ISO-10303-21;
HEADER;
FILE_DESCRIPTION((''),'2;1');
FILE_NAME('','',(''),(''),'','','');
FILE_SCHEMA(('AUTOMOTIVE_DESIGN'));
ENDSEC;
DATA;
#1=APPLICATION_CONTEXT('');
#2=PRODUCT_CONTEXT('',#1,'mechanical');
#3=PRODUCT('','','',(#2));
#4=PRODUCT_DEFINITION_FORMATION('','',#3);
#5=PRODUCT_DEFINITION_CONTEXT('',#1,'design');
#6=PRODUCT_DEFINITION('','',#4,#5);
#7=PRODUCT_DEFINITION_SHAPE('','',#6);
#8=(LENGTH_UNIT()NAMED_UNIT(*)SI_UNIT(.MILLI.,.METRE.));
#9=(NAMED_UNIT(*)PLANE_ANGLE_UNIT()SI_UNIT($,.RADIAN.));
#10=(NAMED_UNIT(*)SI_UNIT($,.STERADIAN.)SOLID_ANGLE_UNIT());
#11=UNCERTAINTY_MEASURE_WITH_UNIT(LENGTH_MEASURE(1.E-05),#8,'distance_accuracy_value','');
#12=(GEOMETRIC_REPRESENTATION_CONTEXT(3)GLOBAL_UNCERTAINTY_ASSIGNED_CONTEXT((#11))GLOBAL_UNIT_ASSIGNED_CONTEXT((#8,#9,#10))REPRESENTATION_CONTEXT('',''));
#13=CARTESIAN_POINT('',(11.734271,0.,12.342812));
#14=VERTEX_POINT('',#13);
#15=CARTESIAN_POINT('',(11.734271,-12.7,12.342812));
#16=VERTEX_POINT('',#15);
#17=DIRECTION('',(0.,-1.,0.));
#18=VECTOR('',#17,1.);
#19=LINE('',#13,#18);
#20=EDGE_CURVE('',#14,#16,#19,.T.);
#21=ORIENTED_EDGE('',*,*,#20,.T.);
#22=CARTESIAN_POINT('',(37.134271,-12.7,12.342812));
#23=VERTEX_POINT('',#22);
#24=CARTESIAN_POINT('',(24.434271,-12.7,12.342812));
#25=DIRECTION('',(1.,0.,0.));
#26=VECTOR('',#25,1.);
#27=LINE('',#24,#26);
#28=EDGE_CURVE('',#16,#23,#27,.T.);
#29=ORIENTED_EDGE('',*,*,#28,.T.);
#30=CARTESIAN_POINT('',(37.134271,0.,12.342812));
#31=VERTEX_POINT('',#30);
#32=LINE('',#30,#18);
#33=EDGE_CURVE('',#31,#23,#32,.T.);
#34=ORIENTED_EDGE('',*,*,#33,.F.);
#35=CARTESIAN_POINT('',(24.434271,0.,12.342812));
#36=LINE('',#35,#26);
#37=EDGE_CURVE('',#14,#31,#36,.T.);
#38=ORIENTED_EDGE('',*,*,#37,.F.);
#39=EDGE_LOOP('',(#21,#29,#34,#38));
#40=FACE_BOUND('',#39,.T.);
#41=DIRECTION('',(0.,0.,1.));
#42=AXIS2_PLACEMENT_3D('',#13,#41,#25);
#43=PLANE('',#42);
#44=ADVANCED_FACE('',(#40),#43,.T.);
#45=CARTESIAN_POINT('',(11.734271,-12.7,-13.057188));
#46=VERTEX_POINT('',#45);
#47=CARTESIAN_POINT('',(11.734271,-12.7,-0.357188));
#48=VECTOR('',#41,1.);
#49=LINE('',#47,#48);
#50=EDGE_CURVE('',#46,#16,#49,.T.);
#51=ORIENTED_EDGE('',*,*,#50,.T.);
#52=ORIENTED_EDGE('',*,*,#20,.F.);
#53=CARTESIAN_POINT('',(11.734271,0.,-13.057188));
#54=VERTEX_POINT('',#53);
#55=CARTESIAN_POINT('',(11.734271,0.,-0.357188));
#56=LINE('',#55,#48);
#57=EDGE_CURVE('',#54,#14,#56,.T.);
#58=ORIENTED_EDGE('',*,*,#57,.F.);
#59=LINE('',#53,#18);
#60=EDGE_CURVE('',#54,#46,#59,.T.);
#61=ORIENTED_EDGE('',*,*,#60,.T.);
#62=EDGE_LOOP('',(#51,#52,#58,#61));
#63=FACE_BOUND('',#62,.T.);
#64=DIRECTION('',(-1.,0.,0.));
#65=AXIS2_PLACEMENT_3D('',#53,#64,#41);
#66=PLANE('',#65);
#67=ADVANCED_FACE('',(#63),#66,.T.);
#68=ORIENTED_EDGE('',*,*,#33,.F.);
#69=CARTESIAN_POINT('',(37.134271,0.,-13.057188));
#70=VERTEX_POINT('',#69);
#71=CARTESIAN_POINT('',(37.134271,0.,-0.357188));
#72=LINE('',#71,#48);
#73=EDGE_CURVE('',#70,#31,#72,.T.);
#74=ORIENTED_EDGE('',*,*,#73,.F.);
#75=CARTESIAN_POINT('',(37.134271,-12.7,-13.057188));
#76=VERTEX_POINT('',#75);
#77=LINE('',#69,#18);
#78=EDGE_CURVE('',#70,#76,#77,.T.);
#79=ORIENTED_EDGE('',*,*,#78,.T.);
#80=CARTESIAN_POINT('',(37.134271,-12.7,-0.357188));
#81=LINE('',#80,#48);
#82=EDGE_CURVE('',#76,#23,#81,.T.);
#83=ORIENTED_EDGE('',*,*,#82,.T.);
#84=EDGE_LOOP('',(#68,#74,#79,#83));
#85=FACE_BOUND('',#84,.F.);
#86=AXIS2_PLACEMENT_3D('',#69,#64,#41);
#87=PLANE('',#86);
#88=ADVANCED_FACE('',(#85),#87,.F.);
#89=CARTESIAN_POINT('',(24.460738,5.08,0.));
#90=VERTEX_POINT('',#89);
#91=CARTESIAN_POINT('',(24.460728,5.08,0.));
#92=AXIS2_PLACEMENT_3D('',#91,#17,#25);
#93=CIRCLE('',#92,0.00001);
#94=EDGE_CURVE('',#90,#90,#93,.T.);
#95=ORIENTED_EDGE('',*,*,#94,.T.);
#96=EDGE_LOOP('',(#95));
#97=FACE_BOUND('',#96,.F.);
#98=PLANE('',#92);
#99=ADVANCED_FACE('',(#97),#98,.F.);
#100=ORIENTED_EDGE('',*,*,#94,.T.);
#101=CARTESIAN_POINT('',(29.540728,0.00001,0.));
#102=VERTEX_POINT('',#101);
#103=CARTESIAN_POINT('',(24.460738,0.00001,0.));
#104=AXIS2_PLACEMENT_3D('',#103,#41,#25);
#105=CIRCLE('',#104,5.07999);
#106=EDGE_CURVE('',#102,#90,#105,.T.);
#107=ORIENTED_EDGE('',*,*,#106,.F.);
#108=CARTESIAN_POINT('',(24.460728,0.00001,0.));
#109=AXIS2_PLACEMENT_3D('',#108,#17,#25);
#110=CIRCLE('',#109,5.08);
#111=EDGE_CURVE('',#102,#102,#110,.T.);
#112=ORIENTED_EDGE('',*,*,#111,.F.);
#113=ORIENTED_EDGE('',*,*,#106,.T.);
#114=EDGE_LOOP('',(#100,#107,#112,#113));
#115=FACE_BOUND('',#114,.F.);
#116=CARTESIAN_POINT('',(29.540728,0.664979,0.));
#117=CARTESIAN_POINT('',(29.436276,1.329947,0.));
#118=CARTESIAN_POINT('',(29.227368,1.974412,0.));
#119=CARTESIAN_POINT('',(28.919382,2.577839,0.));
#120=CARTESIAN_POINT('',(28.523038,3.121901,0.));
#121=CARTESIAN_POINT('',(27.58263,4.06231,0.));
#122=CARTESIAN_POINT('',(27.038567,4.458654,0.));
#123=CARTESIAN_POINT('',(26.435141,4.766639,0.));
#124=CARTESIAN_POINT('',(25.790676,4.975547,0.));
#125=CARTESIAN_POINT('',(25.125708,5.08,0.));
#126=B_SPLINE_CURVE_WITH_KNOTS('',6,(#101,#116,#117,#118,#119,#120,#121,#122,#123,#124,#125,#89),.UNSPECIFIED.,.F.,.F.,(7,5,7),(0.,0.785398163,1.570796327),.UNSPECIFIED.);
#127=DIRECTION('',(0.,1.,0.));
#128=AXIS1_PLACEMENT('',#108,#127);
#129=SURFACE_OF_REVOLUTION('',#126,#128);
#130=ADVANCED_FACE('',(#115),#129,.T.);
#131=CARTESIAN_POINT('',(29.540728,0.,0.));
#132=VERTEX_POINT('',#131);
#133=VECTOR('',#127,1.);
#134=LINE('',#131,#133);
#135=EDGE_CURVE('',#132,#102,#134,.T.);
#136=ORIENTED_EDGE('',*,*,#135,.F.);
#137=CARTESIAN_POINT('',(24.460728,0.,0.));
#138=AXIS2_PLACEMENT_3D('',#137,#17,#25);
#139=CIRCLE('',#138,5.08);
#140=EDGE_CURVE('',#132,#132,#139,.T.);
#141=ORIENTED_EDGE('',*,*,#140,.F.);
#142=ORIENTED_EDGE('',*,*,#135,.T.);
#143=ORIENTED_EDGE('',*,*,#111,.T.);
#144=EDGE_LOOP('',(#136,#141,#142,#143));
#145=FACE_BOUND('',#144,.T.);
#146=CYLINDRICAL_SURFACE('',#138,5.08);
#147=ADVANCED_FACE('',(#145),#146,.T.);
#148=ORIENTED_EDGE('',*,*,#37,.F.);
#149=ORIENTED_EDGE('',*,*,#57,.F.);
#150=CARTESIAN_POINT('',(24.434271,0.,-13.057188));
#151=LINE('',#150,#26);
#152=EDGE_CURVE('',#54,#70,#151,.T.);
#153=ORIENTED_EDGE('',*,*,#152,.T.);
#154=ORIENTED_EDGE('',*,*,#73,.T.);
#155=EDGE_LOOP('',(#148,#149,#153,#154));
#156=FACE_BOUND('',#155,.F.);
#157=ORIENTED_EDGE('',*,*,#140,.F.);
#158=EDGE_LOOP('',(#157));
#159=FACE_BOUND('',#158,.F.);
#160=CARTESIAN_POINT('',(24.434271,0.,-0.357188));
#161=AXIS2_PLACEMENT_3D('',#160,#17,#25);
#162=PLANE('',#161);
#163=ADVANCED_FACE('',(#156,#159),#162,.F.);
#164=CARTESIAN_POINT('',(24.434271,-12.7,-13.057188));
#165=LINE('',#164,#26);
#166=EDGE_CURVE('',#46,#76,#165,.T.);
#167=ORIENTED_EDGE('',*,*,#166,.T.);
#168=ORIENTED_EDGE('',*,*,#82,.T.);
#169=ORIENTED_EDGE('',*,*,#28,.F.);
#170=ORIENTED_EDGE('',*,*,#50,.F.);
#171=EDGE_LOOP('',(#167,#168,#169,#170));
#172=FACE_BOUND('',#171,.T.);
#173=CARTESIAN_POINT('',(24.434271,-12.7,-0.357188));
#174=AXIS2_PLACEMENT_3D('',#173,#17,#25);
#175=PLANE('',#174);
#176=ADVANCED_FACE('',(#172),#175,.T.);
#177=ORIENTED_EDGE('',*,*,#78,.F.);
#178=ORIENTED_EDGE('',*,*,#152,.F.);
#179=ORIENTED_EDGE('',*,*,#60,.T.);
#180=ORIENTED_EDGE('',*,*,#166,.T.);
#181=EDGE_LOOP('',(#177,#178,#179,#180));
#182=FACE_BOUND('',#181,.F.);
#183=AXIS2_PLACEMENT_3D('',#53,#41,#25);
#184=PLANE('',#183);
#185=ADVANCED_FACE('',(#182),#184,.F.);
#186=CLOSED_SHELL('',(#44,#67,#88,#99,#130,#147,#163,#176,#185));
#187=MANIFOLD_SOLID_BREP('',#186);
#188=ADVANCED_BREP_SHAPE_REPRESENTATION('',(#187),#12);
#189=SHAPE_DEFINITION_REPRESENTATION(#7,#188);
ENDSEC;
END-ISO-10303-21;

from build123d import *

# Parameters (mm, degrees)
F0_W     = 25.4
F0_H     = 25.4
F1_DEPTH = 12.7
F2_R     = 5.08
F3_DEPTH = 5.08
F4_R     = 5.07999


# Not quite as in the source:
# - a fillet or chamfer is up to 0.001 mm smaller than in the source, because OpenCascade refuses the exact size


with BuildPart() as f1:
    # F0 (on Front) → F1 (new body)
    with BuildSketch(Plane.XZ):
        with Locations((24.4342711151, -0.3571881309)):
            Rectangle(F0_W, F0_H)
    extrude(amount=F1_DEPTH)

    # F2 (on Front) → F3 (join)
    with BuildSketch(Plane.XZ):
        with Locations((24.4607284337, 0)):
            Circle(F2_R)
    extrude(amount=-F3_DEPTH)

    # F4 (radius 5.08 in the source; OpenCascade refuses exactly that, so slightly less here)
    f4_edges = [f1.edges().sort_by_distance(p)[0] for p in [
        (19.380728, 5.08, 0),
    ]]
    fillet(f4_edges, radius=F4_R)


solid = f1.part
